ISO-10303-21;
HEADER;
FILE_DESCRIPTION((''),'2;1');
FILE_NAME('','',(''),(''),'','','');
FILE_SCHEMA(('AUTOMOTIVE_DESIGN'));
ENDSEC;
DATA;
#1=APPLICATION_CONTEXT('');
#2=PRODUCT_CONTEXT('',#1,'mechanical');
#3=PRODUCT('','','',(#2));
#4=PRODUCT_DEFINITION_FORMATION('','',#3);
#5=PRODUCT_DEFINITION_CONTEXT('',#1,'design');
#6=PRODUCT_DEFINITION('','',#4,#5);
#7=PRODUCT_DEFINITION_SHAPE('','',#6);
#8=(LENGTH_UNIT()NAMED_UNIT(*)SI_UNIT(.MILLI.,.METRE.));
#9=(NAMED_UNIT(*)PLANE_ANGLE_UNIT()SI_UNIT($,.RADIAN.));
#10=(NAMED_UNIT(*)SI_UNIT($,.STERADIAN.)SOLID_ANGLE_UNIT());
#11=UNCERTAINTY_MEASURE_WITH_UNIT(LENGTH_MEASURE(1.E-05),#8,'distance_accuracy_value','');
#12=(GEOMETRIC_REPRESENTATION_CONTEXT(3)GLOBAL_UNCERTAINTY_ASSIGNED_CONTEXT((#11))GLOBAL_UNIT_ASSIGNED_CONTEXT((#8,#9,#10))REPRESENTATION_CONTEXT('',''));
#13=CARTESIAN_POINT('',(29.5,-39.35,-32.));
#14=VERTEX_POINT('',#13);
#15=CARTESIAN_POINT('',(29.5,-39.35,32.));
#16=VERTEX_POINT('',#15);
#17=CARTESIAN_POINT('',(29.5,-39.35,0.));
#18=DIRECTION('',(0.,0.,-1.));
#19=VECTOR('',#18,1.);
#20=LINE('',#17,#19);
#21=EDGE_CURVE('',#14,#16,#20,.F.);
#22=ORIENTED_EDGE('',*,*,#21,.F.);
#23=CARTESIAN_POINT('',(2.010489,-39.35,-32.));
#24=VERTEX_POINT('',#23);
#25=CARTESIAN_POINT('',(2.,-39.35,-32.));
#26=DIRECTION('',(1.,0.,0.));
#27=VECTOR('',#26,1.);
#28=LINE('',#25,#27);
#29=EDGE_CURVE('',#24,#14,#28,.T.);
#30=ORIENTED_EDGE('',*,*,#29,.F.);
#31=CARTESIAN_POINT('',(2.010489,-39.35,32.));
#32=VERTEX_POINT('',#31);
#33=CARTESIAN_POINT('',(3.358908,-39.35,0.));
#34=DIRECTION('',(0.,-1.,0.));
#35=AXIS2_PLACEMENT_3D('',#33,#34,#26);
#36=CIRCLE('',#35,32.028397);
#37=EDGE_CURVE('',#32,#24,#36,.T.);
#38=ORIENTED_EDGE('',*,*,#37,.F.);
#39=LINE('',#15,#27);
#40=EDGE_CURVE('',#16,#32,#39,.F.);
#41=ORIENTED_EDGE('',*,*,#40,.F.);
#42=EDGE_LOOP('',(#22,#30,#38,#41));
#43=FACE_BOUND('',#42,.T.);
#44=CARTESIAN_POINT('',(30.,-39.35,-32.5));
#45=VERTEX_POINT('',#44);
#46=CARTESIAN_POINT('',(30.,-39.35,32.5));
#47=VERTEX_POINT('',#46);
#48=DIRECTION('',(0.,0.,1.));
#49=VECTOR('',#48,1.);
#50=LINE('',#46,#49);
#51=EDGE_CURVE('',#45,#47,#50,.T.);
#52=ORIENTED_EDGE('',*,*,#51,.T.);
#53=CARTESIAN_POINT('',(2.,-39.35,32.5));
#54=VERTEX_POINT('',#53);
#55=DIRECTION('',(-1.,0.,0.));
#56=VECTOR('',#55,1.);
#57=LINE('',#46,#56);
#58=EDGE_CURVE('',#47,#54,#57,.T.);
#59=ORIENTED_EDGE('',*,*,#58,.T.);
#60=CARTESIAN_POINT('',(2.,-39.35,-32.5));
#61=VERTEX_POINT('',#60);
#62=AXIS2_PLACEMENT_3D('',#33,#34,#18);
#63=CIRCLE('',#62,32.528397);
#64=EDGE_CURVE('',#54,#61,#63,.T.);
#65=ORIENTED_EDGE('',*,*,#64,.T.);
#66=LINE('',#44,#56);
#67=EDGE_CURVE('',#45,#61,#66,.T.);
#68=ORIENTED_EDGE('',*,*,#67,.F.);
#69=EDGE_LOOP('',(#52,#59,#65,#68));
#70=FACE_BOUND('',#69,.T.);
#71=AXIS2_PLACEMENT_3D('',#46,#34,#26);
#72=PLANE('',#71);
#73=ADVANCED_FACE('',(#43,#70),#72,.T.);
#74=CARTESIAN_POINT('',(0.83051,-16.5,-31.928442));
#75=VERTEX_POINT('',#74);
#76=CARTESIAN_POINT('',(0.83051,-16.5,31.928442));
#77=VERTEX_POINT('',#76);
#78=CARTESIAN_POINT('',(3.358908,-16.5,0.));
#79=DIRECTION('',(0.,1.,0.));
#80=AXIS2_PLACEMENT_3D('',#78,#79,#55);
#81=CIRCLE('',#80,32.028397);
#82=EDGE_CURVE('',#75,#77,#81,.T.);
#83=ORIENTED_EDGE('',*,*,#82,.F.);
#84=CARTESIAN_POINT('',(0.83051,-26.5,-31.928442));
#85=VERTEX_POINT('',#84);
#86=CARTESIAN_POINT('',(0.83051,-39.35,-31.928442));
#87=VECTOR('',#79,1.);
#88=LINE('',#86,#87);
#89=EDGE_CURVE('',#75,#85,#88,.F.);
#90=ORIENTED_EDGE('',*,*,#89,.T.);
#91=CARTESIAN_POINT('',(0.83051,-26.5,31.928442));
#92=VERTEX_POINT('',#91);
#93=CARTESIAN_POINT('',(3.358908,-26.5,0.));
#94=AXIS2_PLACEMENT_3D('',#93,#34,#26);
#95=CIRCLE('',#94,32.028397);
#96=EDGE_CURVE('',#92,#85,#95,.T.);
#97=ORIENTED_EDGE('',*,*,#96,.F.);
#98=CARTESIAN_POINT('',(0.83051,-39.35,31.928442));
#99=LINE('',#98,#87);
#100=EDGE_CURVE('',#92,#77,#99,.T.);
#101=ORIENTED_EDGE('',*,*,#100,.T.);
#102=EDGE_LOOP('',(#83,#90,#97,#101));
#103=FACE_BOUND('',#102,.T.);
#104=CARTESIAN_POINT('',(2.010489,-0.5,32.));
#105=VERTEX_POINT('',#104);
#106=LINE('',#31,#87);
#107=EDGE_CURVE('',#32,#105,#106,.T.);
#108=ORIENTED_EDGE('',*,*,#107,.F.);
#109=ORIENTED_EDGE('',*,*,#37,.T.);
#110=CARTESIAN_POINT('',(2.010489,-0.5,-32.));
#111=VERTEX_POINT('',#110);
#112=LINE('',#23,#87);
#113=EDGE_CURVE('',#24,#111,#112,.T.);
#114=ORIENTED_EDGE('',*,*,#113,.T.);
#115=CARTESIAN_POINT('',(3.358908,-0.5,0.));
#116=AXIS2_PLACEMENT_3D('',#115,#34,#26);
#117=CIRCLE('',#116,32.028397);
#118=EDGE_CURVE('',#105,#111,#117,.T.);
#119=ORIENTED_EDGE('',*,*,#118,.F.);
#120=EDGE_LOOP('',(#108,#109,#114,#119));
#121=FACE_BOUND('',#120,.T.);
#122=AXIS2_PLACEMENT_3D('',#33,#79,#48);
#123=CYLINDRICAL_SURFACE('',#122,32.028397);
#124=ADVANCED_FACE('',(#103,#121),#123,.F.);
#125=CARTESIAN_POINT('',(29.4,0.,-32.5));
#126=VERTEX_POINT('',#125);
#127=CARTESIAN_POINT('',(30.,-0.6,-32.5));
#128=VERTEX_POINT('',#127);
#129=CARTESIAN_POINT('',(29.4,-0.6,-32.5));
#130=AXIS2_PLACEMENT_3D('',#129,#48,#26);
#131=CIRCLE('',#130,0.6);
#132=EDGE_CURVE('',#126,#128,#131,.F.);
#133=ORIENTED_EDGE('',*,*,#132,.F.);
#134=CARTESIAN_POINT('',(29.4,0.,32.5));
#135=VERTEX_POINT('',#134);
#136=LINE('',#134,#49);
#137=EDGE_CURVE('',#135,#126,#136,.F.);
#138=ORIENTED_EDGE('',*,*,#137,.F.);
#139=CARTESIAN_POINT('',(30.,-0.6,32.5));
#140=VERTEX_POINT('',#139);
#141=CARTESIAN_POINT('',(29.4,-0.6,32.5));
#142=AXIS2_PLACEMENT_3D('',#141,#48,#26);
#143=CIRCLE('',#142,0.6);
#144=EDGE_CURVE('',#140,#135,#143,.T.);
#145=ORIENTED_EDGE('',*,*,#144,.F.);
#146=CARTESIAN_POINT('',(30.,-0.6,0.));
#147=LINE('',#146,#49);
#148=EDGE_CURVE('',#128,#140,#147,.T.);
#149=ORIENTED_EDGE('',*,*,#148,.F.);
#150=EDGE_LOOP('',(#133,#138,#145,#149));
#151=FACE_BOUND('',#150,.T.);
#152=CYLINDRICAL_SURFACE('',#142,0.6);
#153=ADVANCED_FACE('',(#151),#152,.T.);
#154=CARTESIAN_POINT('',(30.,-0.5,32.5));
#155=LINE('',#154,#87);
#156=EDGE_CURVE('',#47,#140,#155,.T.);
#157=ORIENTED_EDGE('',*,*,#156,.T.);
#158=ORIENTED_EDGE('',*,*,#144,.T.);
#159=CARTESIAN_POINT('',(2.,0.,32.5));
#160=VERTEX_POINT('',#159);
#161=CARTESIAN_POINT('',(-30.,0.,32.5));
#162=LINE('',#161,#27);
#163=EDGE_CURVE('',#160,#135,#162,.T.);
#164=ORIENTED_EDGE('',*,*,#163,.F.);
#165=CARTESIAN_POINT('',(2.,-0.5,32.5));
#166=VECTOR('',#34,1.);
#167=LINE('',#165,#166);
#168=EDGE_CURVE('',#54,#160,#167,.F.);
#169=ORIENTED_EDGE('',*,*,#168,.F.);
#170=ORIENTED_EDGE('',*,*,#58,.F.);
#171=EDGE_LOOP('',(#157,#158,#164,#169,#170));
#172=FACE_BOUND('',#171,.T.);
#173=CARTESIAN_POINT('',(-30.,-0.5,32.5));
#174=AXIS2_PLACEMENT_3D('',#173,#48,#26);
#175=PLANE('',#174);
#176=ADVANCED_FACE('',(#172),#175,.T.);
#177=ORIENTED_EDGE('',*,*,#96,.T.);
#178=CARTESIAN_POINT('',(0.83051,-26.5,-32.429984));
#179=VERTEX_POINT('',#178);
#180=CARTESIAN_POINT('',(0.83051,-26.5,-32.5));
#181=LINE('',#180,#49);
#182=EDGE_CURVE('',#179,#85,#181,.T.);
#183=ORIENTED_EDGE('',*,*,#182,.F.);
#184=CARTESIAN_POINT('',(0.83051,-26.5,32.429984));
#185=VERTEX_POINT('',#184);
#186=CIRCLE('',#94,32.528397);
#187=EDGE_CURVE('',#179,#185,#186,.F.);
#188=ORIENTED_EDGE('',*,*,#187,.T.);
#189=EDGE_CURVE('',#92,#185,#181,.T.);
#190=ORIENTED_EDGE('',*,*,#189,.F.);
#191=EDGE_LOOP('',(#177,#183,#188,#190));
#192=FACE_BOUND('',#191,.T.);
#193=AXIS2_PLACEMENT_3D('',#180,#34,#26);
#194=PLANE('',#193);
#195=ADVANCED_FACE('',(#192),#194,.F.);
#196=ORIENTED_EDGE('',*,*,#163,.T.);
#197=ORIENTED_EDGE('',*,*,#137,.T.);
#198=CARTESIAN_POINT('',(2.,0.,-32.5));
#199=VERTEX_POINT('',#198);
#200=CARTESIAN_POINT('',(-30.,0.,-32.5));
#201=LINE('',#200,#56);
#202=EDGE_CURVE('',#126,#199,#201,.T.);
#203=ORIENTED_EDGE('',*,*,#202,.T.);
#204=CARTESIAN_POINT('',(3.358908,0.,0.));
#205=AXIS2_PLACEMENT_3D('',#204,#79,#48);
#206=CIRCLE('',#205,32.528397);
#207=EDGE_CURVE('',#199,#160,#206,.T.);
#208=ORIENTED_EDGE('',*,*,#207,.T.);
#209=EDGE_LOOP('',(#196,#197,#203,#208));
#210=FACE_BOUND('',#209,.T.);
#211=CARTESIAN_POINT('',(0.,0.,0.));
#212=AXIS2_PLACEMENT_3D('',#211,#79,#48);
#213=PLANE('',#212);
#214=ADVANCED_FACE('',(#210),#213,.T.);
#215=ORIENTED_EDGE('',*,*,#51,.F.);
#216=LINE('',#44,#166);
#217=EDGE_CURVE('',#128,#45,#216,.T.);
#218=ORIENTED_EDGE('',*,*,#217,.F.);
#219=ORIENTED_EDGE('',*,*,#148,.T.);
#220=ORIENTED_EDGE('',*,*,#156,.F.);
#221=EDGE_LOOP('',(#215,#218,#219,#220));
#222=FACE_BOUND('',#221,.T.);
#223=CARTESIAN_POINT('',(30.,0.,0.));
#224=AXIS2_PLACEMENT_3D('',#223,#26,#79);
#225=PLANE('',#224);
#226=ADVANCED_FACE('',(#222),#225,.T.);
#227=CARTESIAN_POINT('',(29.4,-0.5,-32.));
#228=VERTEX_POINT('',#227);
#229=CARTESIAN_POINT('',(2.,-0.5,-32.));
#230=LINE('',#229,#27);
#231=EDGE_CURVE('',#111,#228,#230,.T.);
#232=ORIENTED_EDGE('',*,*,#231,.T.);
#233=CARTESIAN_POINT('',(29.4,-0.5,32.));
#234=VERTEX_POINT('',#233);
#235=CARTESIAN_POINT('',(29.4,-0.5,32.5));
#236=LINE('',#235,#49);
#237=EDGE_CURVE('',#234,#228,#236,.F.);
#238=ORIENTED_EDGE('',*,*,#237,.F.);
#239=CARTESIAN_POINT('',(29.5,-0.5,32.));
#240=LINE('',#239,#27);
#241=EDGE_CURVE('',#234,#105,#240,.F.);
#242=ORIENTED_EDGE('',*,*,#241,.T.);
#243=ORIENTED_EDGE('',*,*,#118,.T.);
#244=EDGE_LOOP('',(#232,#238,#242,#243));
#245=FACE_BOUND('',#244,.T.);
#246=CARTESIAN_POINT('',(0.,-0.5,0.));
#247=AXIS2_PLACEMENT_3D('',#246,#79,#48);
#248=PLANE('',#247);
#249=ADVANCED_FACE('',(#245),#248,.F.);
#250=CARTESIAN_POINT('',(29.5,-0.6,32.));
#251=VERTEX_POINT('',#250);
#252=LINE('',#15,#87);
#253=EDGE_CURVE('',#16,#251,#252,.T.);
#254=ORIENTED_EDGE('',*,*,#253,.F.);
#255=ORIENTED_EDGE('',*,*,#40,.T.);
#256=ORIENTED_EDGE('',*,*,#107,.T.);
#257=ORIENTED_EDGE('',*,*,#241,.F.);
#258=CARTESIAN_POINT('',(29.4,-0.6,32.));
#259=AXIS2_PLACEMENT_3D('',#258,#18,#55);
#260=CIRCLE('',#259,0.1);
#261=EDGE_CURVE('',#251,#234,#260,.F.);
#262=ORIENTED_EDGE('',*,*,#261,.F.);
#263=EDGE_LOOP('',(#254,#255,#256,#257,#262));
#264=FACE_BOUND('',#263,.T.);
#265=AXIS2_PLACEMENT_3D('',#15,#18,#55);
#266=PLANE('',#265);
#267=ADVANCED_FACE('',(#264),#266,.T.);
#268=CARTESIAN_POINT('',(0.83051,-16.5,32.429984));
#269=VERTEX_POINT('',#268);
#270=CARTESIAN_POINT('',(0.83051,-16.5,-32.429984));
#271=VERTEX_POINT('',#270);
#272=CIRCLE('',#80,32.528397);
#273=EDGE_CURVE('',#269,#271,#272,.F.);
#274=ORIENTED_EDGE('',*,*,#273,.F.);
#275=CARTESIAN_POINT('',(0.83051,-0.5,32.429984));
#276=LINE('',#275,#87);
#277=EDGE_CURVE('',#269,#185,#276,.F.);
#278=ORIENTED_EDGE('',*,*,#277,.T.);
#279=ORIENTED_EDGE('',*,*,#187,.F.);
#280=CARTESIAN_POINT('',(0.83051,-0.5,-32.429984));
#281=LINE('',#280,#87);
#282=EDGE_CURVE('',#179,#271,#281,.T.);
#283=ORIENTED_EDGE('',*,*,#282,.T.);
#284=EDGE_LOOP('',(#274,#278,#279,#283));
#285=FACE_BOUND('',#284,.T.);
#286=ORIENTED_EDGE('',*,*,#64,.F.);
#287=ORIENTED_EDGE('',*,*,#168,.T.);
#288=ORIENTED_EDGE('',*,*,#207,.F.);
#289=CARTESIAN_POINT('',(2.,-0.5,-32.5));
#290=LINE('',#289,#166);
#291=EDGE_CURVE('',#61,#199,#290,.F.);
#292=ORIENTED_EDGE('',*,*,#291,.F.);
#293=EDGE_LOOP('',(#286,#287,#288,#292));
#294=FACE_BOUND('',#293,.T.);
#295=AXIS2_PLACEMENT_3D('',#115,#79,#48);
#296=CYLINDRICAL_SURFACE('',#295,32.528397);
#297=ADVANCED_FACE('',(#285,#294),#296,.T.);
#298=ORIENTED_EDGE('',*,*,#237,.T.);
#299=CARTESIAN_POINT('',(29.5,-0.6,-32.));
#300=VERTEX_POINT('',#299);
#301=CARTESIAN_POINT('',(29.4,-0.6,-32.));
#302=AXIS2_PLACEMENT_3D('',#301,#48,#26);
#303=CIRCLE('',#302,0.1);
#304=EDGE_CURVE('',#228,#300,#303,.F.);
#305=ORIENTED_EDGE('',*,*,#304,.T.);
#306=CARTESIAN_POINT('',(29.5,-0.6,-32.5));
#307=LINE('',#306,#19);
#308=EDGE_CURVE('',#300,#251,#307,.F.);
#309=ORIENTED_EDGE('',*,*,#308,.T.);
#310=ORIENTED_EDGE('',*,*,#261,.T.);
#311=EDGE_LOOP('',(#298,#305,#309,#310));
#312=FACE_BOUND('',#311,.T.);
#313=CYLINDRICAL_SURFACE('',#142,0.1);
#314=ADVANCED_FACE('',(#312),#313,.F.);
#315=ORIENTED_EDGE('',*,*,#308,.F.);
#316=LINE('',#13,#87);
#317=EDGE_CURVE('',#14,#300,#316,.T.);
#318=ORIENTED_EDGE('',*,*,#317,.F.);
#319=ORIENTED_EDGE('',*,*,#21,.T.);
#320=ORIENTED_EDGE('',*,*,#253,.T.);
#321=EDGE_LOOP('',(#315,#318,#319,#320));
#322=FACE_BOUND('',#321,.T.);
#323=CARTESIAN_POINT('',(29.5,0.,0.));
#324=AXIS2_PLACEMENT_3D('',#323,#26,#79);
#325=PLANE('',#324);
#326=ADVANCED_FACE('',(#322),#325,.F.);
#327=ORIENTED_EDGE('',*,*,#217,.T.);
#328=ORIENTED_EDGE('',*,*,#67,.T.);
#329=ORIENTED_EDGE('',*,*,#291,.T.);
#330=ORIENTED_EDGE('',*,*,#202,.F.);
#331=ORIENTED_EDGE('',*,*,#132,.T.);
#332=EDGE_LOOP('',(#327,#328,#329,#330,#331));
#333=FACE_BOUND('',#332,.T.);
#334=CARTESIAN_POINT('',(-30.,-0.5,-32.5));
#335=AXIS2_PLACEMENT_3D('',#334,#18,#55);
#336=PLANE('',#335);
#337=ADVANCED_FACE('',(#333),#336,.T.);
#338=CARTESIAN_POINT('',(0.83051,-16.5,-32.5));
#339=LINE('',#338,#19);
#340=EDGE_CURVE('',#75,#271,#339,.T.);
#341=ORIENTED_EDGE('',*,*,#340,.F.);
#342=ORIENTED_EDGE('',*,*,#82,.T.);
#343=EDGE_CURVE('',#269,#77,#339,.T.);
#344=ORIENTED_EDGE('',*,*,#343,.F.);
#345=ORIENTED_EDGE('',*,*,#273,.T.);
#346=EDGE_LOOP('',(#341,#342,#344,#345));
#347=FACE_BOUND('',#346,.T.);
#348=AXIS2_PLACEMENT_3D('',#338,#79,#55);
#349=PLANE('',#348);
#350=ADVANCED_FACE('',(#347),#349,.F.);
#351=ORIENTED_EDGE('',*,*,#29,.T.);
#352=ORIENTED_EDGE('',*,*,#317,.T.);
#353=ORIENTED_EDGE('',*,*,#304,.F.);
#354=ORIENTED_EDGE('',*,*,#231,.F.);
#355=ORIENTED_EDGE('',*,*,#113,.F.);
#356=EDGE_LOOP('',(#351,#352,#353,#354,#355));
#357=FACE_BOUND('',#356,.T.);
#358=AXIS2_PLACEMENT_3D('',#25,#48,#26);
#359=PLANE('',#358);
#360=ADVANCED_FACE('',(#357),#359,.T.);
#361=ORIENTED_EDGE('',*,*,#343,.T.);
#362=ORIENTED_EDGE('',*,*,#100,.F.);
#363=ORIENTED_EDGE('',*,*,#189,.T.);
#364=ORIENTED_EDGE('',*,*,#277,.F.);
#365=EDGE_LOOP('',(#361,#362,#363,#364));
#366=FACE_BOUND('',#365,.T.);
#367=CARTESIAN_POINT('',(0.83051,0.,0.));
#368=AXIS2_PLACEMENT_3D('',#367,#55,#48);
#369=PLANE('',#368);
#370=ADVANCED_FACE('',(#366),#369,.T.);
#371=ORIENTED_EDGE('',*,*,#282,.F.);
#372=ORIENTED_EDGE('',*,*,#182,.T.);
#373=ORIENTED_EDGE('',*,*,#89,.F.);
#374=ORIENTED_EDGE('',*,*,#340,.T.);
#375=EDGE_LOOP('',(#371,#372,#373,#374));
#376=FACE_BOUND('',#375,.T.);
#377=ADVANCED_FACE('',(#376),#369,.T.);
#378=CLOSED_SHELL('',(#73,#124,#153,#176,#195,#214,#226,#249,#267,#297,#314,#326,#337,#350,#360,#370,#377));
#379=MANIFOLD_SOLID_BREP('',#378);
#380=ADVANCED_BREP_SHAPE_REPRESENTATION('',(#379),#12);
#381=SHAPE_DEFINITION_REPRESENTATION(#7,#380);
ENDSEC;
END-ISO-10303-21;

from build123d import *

# Parameters (mm, degrees)
SKETCH1_W                    = 60
SKETCH1_H                    = 65
BASE_FLANGE1_DEPTH           = 0.5
CUT_EXTRUDE1_DEPTH           = 45.232341109
EDGE_FLANGE1_STRIP_W         = 2.2
EDGE_FLANGE1_STRIP_H         = 0.5
EDGE_FLANGE1_STRIP_CUT_DEPTH = 65
EDGE_FLANGE1_DEPTH           = 65
EXTRUDE_THIN1_START          = 38.85
EXTRUDE_THIN1_DEPTH          = 38.85
SKETCH87_W                   = 65
SKETCH87_H                   = 10
CUT_EXTRUDE2_DEPTH           = 30


# Sheet-metal steps are written as plain solids
with BuildPart() as part:
    # Sketch1 → Base-Flange1 (new body)
    with BuildSketch(Plane(origin=(0, 0, 0), x_dir=(1, 0, 0), z_dir=(0, 1, 0))):
        Rectangle(SKETCH1_W, SKETCH1_H)
    extrude(amount=-BASE_FLANGE1_DEPTH)

    # Sketch7 → Cut-Extrude1 (cut, through all)
    with BuildSketch(Plane.XZ.offset(0.5)):
        with BuildLine():
            Line((2, 32.5), (-30, 32.5))
            Line((-30, 32.5), (-30, -32.5))
            Line((-30, -32.5), (2, -32.5))
            ThreePointArc((2, -32.5), (-29.169489574, 0), (2, 32.5))
        make_face()
    extrude(amount=-CUT_EXTRUDE1_DEPTH, mode=Mode.SUBTRACT)

    # Edge-Flange1 strip (across the edge) → Edge-Flange1 strip cut (cut)
    with BuildSketch(Plane(origin=(30, -0.5, -32.5), x_dir=(-1, 0, 0), z_dir=(0, 0, 1))):
        with Locations((-0.5, -0.25)):
            Rectangle(EDGE_FLANGE1_STRIP_W, EDGE_FLANGE1_STRIP_H)
    extrude(amount=EDGE_FLANGE1_STRIP_CUT_DEPTH, mode=Mode.SUBTRACT)

    # Edge-Flange1 section (across the edge) → Edge-Flange1 (add)
    with BuildSketch(Plane(origin=(30, -0.5, -32.5), x_dir=(-1, 0, 0), z_dir=(0, 0, 1))):
        with BuildLine():
            Line((0, 0.1), (0, 38.85))
            Line((0, 38.85), (0.5, 38.85))
            Line((0.5, 38.85), (0.5, 0.1))
            ThreePointArc((0.5, 0.1), (0.529289322, 0.029289322), (0.6, 0))
            Line((0.6, 0), (0.6, -0.5))
            ThreePointArc((0.6, -0.5), (0.175735931, -0.324264069), (0, 0.1))
        make_face()
    extrude(amount=EDGE_FLANGE1_DEPTH)

    # Sketch84 → Extrude-Thin1 (add)
    with BuildSketch(Plane.XZ.offset(0.5).offset(EXTRUDE_THIN1_START)):
        with BuildLine():
            Line((29.5, 32.5), (2, 32.5))
            ThreePointArc((2, 32.5), (-29.169489574, 0), (2, -32.5))
            Line((2, -32.5), (29.5, -32.5))
            Line((29.5, -32.5), (29.5, -32))
            Line((29.5, -32), (2.010489053, -32))
            ThreePointArc((2.010489053, -32), (-28.669489574, 0), (2.010489053, 32))
            Line((2.010489053, 32), (29.5, 32))
            Line((29.5, 32), (29.5, 32.5))
        make_face()
    extrude(amount=-EXTRUDE_THIN1_DEPTH)

    # Sketch87 → Cut-Extrude2 (cut)
    with BuildSketch(Plane.ZY.offset(29.169489574)):
        with Locations((0, -21.5)):
            Rectangle(SKETCH87_W, SKETCH87_H)
    extrude(amount=-CUT_EXTRUDE2_DEPTH, mode=Mode.SUBTRACT)


solid = part.part
